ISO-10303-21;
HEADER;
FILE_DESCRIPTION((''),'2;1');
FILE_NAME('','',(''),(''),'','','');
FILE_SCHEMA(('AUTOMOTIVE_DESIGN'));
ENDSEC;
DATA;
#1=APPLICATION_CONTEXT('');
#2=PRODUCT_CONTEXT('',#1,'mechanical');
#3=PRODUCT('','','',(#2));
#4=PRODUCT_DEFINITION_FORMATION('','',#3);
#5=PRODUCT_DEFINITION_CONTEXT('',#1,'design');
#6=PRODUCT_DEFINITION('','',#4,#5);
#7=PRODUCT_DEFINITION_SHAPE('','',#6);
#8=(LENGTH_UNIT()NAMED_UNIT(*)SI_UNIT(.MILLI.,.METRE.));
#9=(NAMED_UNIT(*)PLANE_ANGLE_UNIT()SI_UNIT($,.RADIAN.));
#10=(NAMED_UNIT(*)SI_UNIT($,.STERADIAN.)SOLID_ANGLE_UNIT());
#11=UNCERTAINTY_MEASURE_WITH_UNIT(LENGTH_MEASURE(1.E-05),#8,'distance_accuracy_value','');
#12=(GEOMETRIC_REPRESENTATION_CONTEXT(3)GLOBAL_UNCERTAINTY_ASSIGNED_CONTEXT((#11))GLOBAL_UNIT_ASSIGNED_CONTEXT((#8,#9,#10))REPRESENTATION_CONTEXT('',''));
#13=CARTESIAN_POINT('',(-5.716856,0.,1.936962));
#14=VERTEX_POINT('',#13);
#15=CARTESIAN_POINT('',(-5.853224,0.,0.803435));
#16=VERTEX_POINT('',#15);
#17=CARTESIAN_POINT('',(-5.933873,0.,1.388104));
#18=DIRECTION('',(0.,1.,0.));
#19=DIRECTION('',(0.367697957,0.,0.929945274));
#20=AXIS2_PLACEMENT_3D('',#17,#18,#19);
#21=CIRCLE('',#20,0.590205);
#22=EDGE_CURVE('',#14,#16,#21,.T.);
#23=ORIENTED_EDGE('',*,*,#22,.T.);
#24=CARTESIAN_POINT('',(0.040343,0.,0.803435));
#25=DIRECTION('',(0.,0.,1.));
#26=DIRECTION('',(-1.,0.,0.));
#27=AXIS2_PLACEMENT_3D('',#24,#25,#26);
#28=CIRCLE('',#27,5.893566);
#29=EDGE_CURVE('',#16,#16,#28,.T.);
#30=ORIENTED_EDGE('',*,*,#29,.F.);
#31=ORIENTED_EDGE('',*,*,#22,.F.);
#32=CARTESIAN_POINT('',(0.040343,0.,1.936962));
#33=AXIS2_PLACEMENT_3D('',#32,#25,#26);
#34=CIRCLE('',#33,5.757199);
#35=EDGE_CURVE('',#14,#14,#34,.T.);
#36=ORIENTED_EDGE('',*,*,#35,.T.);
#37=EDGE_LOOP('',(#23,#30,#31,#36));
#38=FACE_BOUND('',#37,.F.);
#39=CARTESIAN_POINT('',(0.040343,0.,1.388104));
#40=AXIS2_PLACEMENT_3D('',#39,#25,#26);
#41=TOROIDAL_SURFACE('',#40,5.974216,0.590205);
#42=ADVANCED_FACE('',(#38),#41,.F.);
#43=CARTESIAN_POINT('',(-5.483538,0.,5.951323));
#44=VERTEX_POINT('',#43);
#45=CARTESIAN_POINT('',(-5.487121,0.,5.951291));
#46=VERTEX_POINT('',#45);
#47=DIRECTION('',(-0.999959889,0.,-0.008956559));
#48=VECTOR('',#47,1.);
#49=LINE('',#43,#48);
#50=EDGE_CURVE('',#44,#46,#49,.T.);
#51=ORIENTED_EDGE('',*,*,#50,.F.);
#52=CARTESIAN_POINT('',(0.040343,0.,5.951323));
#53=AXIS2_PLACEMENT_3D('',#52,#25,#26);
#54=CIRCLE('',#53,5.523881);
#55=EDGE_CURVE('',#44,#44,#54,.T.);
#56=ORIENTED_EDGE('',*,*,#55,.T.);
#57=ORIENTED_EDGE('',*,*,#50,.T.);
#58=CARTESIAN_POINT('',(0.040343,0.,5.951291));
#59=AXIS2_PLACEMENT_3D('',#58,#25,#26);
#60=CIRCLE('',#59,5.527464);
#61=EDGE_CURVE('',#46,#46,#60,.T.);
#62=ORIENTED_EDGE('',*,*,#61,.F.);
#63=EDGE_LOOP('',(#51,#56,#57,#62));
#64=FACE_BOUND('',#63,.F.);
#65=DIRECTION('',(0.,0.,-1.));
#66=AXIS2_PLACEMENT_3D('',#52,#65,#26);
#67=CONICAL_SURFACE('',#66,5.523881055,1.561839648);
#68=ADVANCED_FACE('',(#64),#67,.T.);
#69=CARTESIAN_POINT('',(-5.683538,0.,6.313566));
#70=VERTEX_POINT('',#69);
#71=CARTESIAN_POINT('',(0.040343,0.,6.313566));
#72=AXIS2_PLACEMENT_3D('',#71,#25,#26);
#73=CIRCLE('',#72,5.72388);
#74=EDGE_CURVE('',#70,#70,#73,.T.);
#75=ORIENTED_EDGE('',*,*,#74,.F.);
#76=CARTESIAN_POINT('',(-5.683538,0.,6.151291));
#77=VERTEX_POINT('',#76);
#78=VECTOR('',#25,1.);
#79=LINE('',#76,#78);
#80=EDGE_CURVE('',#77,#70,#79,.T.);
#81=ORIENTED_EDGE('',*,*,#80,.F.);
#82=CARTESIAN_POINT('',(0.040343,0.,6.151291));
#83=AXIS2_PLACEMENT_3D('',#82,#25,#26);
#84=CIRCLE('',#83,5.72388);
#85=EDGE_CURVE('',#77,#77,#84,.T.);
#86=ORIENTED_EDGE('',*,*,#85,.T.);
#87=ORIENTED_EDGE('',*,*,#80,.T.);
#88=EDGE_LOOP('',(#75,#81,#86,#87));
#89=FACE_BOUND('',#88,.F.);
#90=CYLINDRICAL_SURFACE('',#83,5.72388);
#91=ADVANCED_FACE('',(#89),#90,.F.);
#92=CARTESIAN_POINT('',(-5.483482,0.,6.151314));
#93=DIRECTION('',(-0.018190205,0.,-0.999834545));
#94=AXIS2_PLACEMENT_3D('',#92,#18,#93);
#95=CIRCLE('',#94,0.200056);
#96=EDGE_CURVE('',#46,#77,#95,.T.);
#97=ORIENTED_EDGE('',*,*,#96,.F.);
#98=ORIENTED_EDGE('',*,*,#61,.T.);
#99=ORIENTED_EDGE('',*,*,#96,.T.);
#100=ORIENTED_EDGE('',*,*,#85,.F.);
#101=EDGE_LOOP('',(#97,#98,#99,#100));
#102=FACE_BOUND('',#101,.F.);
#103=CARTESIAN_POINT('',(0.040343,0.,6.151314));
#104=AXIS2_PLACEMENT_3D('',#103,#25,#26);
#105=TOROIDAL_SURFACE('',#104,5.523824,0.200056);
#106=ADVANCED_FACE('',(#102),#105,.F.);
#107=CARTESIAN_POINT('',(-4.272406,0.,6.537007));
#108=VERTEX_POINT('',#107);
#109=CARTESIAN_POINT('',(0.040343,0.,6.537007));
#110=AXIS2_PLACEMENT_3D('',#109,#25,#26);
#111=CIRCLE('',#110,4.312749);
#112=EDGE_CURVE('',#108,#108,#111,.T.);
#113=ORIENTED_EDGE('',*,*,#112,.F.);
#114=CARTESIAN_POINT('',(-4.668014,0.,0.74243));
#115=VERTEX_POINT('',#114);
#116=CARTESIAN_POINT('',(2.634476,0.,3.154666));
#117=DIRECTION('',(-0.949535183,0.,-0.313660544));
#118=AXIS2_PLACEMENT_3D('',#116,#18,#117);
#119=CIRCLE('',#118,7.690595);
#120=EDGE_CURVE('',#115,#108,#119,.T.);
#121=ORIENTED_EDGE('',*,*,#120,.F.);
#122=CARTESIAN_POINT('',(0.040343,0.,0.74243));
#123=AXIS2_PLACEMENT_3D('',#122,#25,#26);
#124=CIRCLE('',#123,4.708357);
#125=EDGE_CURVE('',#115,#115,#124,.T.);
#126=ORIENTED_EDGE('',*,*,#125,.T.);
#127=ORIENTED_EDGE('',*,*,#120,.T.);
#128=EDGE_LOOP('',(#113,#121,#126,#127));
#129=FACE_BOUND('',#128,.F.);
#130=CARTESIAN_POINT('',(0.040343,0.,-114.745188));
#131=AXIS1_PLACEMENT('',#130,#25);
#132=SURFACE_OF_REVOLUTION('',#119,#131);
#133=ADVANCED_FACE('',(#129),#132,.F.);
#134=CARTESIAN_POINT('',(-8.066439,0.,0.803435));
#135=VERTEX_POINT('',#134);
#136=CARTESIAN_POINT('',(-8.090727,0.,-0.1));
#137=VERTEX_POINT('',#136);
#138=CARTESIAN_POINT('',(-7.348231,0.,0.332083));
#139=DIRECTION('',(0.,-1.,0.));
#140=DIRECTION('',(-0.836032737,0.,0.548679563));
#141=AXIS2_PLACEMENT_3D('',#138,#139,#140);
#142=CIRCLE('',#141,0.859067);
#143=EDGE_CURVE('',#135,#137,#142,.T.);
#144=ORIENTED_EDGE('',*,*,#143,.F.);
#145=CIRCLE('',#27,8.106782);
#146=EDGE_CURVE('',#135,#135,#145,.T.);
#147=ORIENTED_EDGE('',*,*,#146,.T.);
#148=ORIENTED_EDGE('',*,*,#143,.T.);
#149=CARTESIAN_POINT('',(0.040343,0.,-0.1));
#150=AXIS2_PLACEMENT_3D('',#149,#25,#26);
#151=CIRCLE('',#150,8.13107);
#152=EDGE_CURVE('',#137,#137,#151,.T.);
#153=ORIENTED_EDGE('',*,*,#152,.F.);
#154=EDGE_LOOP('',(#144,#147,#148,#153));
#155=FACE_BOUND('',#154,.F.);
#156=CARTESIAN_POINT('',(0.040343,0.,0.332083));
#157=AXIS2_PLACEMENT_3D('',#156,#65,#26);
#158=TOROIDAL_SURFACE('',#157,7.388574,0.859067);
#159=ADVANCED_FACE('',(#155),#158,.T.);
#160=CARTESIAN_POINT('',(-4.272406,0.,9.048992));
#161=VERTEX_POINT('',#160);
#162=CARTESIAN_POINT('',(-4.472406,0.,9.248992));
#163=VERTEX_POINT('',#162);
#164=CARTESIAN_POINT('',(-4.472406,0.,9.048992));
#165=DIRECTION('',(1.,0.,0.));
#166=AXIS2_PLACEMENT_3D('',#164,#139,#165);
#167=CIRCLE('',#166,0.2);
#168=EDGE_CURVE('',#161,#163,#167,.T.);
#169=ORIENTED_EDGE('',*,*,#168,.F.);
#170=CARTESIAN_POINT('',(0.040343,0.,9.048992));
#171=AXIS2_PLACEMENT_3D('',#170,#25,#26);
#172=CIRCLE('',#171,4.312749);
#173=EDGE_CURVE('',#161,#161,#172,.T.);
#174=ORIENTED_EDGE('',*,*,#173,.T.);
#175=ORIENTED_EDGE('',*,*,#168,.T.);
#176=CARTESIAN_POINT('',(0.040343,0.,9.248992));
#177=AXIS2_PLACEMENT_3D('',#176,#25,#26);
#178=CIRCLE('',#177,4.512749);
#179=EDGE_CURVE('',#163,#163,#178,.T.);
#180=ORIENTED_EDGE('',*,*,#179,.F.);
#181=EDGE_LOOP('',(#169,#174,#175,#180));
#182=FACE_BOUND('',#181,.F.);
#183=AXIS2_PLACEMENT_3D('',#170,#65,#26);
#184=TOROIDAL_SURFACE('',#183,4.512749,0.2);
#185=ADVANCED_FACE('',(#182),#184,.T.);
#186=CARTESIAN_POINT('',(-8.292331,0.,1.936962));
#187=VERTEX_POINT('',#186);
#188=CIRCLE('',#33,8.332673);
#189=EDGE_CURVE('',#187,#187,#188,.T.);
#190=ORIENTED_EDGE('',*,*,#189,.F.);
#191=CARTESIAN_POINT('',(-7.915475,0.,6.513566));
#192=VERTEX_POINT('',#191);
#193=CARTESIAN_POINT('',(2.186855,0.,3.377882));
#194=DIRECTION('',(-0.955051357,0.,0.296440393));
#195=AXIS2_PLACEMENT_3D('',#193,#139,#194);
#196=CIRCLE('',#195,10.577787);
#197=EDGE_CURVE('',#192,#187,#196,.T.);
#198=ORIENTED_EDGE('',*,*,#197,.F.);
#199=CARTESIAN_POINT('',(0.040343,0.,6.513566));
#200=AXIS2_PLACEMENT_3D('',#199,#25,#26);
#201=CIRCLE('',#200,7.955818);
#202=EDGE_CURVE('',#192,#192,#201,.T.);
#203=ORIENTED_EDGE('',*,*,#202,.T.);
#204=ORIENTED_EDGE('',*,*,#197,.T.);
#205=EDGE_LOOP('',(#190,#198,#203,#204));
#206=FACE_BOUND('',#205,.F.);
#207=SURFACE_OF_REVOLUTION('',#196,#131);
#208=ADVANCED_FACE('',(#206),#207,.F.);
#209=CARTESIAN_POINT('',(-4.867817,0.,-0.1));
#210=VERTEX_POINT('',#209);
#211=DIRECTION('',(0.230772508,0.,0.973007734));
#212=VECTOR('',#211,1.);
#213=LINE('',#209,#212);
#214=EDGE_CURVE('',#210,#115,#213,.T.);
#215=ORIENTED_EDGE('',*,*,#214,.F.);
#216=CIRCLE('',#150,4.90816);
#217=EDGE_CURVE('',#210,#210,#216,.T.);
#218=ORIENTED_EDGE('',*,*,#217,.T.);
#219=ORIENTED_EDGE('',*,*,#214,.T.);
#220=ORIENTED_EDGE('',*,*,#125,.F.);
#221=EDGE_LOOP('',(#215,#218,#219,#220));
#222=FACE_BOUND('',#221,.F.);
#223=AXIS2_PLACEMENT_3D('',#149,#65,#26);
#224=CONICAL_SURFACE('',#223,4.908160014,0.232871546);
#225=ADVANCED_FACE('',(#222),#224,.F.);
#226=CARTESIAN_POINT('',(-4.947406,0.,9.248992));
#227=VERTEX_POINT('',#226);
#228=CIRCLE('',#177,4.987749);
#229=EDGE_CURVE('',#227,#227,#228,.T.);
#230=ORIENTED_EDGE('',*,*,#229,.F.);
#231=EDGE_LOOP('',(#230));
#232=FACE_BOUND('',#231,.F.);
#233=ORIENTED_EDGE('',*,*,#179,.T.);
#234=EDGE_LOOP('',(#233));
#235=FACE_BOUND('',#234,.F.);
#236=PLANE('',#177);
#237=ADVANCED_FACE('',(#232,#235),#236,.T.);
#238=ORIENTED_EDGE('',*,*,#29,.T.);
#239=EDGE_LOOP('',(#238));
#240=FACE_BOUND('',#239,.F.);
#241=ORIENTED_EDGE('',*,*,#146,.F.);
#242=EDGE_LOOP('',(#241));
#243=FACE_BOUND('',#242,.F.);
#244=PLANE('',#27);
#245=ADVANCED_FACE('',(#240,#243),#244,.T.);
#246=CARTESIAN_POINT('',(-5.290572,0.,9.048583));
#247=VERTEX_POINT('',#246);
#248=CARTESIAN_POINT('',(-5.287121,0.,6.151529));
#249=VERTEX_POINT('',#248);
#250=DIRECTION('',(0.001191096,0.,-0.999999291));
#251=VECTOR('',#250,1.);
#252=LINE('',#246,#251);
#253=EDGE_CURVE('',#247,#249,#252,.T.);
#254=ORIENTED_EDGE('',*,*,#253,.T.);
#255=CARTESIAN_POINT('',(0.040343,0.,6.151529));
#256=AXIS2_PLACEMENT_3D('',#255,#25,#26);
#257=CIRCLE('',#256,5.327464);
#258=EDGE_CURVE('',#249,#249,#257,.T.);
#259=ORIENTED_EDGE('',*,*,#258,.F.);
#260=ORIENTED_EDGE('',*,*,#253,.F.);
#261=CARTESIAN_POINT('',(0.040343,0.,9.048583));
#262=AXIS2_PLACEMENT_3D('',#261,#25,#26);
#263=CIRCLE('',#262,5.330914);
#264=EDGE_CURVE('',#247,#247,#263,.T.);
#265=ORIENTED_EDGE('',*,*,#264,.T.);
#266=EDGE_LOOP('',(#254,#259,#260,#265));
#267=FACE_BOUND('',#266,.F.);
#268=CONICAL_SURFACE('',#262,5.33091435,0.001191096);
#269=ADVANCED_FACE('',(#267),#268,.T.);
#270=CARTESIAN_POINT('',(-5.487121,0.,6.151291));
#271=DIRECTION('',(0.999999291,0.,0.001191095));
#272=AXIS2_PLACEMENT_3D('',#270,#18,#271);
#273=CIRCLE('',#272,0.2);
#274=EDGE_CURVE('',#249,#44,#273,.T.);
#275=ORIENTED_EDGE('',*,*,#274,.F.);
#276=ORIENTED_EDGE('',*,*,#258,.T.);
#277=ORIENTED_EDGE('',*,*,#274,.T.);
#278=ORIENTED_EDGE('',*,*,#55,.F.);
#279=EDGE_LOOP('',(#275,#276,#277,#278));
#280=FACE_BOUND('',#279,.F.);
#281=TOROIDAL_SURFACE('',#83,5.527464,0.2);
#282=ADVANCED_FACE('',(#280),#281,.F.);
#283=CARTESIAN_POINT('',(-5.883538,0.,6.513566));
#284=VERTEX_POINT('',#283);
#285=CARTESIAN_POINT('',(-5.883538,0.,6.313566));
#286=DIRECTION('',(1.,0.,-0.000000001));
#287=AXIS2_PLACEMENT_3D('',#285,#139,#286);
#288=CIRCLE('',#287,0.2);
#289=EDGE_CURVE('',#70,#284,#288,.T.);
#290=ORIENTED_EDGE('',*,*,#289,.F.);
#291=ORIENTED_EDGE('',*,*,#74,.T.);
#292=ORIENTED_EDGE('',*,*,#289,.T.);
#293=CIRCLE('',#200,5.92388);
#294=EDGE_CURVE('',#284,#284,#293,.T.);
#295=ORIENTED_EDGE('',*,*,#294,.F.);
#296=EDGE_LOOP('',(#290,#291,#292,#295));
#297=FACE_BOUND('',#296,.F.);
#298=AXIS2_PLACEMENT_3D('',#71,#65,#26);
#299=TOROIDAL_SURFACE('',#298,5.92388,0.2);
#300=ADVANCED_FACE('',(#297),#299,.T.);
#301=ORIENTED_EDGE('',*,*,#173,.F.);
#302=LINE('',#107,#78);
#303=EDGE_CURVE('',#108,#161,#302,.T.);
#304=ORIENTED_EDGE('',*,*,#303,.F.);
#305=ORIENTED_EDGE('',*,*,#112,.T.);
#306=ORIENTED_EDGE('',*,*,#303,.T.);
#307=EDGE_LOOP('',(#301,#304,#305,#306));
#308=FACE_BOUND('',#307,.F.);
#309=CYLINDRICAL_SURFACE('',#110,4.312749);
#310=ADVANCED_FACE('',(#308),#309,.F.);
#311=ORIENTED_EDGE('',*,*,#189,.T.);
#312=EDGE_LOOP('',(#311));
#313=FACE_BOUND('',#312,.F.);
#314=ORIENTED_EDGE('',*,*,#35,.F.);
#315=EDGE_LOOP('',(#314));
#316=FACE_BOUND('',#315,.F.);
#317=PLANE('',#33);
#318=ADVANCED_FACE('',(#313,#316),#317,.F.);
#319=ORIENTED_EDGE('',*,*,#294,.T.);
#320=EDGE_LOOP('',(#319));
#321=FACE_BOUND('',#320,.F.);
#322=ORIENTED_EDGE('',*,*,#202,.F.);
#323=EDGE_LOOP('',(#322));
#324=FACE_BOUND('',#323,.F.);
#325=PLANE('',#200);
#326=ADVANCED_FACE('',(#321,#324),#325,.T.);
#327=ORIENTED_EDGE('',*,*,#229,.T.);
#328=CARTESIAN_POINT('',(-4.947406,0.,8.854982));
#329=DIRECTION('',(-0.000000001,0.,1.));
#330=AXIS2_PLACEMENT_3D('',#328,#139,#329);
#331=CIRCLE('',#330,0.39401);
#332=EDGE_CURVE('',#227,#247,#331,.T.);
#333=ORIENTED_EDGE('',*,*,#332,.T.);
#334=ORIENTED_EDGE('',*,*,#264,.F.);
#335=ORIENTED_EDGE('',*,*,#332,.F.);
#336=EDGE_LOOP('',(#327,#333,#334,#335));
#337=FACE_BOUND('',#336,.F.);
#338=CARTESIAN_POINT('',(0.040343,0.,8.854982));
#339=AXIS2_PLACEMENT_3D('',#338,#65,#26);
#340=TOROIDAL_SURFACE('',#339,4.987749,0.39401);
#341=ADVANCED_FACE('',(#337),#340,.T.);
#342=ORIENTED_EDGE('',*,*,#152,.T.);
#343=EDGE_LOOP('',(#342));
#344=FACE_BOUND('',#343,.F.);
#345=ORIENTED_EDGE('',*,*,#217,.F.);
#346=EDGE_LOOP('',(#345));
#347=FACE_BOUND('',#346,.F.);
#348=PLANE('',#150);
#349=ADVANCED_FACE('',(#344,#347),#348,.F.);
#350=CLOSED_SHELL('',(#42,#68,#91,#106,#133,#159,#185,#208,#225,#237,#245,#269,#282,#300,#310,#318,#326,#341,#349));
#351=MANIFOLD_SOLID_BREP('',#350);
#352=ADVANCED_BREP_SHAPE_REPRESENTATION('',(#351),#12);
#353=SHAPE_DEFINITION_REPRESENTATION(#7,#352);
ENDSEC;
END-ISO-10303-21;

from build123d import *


# Not quite as in the source:
# - ends of sketch curves that miss each other by under 0.0002 mm in the source are joined
# - a feature names something its author has since deleted; it is built from what else it names


with BuildPart() as f1:
    # F0 (on Front) → F1 (revolve)
    with BuildSketch(Plane.XZ):
        with BuildLine():
            Line((-5.8782235887, 0.9034351679), (-8.0914394081, 0.9034351679))
            ThreePointArc((-8.0914394081, 0.9034351679), (-8.231987956, 0.4551696138), (-8.1157273695, 0))
            Line((-8.1157273695, 0), (-4.8928172328, 0))
            Line((-4.8928172328, 0), (-4.6930144623, 0.8424298139))
            ThreePointArc((-4.6930144623, 0.8424298139), (-5.0632580989, 3.778500016), (-4.2974063379, 6.63700656))
            Line((-4.2974063379, 6.63700656), (-4.2974063379, 9.1489921744))
            ThreePointArc((-4.2974063379, 9.1489921744), (-4.3559849816, 9.2904135306), (-4.4974063379, 9.3489921744))
            Line((-4.4974063379, 9.3489921744), (-4.9724063379, 9.3489921744))
            ThreePointArc((-4.9724063379, 9.3489921744), (-5.171105885, 9.2952208474), (-5.3155715691, 9.1485834315))
            Line((-5.3155715691, 9.1485834315), (-5.312120898, 6.2515290229))
            ThreePointArc((-5.312120898, 6.2515290229), (-5.3693549829, 6.1112267685), (-5.5085382742, 6.0513228918))
            Line((-5.5085382742, 6.0513228918), (-5.5121207562, 6.0512908038))
            ThreePointArc((-5.5121207562, 6.0512908038), (-5.6512200325, 6.1111417695), (-5.7085376994, 6.2512908038))
            Line((-5.7085376994, 6.2512908038), (-5.7085376994, 6.4135657753))
            ThreePointArc((-5.7085376994, 6.4135657753), (-5.7671163431, 6.5549871316), (-5.9085376994, 6.6135657753))
            Line((-5.9085376994, 6.6135657753), (-7.9404749973, 6.6135657753))
            ThreePointArc((-7.9404749973, 6.6135657753), (-8.3802520708, 4.3459608415), (-8.317330532, 2.0369617314))
            Line((-8.317330532, 2.0369617314), (-5.7418560656, 2.0369617314))
            ThreePointArc((-5.7418560656, 2.0369617314), (-5.3728936334, 1.4176081129), (-5.8782235887, 0.9034351679))
        make_face()
    revolve(axis=Axis((0.0153427809, 0, -114.6451877141), (0, 0, 1)))


with BuildPart() as f1_1:
    # F2: moved
    add(f1.part.moved(Location((0.025, 0, -0.1))))


solid = f1_1.part
